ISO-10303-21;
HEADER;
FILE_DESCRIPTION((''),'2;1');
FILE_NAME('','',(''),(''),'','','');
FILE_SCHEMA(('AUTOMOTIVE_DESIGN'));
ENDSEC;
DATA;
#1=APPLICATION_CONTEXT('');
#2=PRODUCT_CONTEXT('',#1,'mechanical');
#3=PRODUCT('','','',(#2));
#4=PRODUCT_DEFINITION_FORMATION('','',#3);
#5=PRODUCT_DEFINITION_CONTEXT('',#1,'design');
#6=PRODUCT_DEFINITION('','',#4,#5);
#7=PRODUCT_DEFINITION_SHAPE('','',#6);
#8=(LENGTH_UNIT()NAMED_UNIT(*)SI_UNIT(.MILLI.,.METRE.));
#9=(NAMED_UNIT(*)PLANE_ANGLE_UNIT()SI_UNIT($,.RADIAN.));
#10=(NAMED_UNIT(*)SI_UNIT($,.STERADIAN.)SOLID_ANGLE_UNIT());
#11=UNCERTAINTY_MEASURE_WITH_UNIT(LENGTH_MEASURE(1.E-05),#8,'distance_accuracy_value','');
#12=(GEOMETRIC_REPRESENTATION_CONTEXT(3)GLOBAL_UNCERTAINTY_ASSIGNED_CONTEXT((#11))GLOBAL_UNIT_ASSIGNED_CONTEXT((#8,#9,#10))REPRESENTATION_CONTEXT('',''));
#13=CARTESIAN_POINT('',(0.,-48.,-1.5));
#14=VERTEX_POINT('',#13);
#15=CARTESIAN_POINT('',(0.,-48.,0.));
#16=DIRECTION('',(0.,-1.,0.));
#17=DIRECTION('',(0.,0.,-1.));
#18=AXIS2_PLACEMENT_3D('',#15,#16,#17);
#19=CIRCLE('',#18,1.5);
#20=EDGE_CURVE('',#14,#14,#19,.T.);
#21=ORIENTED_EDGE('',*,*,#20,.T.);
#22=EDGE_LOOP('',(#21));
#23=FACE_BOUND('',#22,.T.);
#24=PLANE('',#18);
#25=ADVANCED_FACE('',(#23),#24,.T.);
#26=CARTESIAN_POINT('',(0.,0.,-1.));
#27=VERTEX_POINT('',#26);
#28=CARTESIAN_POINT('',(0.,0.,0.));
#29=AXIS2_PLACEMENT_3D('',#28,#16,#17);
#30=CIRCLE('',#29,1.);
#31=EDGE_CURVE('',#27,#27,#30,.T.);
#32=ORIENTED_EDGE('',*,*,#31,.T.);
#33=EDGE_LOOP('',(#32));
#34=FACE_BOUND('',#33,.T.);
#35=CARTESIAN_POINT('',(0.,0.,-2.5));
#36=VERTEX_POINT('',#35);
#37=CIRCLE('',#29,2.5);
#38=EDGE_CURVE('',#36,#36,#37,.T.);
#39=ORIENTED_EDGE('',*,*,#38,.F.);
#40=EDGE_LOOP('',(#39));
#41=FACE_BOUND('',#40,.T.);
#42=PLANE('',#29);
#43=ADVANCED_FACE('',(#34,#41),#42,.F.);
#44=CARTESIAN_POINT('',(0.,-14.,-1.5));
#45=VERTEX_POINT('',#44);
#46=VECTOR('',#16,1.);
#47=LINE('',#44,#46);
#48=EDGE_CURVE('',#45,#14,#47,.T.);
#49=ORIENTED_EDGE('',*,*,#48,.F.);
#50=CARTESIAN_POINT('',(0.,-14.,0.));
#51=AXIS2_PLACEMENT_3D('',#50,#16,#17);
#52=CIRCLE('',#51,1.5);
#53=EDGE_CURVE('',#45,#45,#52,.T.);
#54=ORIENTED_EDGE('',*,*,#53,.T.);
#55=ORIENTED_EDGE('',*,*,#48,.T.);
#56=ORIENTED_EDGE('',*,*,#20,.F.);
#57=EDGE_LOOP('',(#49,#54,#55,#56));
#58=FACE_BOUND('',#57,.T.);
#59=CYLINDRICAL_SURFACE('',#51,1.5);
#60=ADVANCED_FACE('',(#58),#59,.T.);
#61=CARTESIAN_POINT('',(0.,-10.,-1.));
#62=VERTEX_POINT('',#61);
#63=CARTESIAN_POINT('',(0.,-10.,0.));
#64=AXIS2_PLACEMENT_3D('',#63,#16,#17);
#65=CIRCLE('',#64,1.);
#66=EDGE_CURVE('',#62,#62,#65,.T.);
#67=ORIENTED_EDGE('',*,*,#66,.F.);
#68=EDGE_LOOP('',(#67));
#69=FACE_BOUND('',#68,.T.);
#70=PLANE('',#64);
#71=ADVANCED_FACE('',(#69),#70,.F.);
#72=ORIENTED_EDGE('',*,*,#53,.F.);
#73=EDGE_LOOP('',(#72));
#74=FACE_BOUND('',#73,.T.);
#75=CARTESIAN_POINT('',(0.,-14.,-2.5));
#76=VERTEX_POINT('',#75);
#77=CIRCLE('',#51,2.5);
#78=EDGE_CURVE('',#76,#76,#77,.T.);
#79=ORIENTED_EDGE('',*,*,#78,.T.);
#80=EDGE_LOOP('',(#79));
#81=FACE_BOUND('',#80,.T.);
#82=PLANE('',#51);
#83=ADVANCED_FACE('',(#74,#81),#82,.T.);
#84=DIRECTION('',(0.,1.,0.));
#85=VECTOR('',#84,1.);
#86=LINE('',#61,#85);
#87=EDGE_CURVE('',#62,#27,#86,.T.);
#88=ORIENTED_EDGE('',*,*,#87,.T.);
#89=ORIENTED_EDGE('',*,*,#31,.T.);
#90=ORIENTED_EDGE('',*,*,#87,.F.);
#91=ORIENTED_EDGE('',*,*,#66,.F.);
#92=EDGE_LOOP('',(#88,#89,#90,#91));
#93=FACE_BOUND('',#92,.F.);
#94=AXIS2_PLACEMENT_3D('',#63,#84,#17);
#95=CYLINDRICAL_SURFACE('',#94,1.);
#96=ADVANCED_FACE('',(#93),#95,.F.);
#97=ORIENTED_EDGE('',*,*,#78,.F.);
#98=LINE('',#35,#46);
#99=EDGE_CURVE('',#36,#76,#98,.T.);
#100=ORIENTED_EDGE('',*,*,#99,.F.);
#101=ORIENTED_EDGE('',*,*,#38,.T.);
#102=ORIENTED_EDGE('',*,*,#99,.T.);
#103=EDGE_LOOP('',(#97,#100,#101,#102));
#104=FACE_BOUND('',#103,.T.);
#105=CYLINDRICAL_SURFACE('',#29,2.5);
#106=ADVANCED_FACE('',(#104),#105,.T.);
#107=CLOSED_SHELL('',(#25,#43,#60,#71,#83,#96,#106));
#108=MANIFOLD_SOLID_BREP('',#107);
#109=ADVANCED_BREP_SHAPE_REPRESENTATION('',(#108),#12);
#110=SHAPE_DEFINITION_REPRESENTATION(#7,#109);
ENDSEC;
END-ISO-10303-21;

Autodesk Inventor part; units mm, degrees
ref_plane "YZ Plane" through (0, 0, 0) normal (1, 0, 0) x (0, 1, 0)
ref_plane "XZ Plane" through (0, 0, 0) normal (0, 1, 0) x (-1, 0, 0)
ref_plane "XY Plane" through (0, 0, 0) normal (0, 0, 1) x (1, 0, 0)
sketch "Sketch1" plane through (0, 0, 0) normal (1, 0, 0) x (0, 1, 0)
  line L0 (0, 0) -> (-48, 0)
  line L1 (-10, 0) -> (-10, -1)
  line L2 (-10, -1) -> (0, -1)
  line L3 (0, -1) -> (0, -2.5)
  line L4 (0, -2.5) -> (-14, -2.5)
  line L5 (-14, -2.5) -> (-14, -1.5)
  line L6 (-14, -1.5) -> (-48, -1.5)
  line L7 (-48, -1.5) -> (-48, 0)
  point P0 (-10, -0.5)
  point P1 (-14, -2)
  dimension "d0" = 3
  dimension "d1" = 2
  dimension "d2" = 5
  dimension "d3" = 14
  dimension "d4" = 10
  dimension "d6" = 34
revolve "Revolution1" add sketch "Sketch1" angle 360 about axis through (0, 0, 0) along (0, -1, 0)
thread "Thread1" size "M3x0.5" class "6g" standard "ANSI Metric M Profile" length 5
properties part number "041" material "Stainless Steel, Austenitic"
